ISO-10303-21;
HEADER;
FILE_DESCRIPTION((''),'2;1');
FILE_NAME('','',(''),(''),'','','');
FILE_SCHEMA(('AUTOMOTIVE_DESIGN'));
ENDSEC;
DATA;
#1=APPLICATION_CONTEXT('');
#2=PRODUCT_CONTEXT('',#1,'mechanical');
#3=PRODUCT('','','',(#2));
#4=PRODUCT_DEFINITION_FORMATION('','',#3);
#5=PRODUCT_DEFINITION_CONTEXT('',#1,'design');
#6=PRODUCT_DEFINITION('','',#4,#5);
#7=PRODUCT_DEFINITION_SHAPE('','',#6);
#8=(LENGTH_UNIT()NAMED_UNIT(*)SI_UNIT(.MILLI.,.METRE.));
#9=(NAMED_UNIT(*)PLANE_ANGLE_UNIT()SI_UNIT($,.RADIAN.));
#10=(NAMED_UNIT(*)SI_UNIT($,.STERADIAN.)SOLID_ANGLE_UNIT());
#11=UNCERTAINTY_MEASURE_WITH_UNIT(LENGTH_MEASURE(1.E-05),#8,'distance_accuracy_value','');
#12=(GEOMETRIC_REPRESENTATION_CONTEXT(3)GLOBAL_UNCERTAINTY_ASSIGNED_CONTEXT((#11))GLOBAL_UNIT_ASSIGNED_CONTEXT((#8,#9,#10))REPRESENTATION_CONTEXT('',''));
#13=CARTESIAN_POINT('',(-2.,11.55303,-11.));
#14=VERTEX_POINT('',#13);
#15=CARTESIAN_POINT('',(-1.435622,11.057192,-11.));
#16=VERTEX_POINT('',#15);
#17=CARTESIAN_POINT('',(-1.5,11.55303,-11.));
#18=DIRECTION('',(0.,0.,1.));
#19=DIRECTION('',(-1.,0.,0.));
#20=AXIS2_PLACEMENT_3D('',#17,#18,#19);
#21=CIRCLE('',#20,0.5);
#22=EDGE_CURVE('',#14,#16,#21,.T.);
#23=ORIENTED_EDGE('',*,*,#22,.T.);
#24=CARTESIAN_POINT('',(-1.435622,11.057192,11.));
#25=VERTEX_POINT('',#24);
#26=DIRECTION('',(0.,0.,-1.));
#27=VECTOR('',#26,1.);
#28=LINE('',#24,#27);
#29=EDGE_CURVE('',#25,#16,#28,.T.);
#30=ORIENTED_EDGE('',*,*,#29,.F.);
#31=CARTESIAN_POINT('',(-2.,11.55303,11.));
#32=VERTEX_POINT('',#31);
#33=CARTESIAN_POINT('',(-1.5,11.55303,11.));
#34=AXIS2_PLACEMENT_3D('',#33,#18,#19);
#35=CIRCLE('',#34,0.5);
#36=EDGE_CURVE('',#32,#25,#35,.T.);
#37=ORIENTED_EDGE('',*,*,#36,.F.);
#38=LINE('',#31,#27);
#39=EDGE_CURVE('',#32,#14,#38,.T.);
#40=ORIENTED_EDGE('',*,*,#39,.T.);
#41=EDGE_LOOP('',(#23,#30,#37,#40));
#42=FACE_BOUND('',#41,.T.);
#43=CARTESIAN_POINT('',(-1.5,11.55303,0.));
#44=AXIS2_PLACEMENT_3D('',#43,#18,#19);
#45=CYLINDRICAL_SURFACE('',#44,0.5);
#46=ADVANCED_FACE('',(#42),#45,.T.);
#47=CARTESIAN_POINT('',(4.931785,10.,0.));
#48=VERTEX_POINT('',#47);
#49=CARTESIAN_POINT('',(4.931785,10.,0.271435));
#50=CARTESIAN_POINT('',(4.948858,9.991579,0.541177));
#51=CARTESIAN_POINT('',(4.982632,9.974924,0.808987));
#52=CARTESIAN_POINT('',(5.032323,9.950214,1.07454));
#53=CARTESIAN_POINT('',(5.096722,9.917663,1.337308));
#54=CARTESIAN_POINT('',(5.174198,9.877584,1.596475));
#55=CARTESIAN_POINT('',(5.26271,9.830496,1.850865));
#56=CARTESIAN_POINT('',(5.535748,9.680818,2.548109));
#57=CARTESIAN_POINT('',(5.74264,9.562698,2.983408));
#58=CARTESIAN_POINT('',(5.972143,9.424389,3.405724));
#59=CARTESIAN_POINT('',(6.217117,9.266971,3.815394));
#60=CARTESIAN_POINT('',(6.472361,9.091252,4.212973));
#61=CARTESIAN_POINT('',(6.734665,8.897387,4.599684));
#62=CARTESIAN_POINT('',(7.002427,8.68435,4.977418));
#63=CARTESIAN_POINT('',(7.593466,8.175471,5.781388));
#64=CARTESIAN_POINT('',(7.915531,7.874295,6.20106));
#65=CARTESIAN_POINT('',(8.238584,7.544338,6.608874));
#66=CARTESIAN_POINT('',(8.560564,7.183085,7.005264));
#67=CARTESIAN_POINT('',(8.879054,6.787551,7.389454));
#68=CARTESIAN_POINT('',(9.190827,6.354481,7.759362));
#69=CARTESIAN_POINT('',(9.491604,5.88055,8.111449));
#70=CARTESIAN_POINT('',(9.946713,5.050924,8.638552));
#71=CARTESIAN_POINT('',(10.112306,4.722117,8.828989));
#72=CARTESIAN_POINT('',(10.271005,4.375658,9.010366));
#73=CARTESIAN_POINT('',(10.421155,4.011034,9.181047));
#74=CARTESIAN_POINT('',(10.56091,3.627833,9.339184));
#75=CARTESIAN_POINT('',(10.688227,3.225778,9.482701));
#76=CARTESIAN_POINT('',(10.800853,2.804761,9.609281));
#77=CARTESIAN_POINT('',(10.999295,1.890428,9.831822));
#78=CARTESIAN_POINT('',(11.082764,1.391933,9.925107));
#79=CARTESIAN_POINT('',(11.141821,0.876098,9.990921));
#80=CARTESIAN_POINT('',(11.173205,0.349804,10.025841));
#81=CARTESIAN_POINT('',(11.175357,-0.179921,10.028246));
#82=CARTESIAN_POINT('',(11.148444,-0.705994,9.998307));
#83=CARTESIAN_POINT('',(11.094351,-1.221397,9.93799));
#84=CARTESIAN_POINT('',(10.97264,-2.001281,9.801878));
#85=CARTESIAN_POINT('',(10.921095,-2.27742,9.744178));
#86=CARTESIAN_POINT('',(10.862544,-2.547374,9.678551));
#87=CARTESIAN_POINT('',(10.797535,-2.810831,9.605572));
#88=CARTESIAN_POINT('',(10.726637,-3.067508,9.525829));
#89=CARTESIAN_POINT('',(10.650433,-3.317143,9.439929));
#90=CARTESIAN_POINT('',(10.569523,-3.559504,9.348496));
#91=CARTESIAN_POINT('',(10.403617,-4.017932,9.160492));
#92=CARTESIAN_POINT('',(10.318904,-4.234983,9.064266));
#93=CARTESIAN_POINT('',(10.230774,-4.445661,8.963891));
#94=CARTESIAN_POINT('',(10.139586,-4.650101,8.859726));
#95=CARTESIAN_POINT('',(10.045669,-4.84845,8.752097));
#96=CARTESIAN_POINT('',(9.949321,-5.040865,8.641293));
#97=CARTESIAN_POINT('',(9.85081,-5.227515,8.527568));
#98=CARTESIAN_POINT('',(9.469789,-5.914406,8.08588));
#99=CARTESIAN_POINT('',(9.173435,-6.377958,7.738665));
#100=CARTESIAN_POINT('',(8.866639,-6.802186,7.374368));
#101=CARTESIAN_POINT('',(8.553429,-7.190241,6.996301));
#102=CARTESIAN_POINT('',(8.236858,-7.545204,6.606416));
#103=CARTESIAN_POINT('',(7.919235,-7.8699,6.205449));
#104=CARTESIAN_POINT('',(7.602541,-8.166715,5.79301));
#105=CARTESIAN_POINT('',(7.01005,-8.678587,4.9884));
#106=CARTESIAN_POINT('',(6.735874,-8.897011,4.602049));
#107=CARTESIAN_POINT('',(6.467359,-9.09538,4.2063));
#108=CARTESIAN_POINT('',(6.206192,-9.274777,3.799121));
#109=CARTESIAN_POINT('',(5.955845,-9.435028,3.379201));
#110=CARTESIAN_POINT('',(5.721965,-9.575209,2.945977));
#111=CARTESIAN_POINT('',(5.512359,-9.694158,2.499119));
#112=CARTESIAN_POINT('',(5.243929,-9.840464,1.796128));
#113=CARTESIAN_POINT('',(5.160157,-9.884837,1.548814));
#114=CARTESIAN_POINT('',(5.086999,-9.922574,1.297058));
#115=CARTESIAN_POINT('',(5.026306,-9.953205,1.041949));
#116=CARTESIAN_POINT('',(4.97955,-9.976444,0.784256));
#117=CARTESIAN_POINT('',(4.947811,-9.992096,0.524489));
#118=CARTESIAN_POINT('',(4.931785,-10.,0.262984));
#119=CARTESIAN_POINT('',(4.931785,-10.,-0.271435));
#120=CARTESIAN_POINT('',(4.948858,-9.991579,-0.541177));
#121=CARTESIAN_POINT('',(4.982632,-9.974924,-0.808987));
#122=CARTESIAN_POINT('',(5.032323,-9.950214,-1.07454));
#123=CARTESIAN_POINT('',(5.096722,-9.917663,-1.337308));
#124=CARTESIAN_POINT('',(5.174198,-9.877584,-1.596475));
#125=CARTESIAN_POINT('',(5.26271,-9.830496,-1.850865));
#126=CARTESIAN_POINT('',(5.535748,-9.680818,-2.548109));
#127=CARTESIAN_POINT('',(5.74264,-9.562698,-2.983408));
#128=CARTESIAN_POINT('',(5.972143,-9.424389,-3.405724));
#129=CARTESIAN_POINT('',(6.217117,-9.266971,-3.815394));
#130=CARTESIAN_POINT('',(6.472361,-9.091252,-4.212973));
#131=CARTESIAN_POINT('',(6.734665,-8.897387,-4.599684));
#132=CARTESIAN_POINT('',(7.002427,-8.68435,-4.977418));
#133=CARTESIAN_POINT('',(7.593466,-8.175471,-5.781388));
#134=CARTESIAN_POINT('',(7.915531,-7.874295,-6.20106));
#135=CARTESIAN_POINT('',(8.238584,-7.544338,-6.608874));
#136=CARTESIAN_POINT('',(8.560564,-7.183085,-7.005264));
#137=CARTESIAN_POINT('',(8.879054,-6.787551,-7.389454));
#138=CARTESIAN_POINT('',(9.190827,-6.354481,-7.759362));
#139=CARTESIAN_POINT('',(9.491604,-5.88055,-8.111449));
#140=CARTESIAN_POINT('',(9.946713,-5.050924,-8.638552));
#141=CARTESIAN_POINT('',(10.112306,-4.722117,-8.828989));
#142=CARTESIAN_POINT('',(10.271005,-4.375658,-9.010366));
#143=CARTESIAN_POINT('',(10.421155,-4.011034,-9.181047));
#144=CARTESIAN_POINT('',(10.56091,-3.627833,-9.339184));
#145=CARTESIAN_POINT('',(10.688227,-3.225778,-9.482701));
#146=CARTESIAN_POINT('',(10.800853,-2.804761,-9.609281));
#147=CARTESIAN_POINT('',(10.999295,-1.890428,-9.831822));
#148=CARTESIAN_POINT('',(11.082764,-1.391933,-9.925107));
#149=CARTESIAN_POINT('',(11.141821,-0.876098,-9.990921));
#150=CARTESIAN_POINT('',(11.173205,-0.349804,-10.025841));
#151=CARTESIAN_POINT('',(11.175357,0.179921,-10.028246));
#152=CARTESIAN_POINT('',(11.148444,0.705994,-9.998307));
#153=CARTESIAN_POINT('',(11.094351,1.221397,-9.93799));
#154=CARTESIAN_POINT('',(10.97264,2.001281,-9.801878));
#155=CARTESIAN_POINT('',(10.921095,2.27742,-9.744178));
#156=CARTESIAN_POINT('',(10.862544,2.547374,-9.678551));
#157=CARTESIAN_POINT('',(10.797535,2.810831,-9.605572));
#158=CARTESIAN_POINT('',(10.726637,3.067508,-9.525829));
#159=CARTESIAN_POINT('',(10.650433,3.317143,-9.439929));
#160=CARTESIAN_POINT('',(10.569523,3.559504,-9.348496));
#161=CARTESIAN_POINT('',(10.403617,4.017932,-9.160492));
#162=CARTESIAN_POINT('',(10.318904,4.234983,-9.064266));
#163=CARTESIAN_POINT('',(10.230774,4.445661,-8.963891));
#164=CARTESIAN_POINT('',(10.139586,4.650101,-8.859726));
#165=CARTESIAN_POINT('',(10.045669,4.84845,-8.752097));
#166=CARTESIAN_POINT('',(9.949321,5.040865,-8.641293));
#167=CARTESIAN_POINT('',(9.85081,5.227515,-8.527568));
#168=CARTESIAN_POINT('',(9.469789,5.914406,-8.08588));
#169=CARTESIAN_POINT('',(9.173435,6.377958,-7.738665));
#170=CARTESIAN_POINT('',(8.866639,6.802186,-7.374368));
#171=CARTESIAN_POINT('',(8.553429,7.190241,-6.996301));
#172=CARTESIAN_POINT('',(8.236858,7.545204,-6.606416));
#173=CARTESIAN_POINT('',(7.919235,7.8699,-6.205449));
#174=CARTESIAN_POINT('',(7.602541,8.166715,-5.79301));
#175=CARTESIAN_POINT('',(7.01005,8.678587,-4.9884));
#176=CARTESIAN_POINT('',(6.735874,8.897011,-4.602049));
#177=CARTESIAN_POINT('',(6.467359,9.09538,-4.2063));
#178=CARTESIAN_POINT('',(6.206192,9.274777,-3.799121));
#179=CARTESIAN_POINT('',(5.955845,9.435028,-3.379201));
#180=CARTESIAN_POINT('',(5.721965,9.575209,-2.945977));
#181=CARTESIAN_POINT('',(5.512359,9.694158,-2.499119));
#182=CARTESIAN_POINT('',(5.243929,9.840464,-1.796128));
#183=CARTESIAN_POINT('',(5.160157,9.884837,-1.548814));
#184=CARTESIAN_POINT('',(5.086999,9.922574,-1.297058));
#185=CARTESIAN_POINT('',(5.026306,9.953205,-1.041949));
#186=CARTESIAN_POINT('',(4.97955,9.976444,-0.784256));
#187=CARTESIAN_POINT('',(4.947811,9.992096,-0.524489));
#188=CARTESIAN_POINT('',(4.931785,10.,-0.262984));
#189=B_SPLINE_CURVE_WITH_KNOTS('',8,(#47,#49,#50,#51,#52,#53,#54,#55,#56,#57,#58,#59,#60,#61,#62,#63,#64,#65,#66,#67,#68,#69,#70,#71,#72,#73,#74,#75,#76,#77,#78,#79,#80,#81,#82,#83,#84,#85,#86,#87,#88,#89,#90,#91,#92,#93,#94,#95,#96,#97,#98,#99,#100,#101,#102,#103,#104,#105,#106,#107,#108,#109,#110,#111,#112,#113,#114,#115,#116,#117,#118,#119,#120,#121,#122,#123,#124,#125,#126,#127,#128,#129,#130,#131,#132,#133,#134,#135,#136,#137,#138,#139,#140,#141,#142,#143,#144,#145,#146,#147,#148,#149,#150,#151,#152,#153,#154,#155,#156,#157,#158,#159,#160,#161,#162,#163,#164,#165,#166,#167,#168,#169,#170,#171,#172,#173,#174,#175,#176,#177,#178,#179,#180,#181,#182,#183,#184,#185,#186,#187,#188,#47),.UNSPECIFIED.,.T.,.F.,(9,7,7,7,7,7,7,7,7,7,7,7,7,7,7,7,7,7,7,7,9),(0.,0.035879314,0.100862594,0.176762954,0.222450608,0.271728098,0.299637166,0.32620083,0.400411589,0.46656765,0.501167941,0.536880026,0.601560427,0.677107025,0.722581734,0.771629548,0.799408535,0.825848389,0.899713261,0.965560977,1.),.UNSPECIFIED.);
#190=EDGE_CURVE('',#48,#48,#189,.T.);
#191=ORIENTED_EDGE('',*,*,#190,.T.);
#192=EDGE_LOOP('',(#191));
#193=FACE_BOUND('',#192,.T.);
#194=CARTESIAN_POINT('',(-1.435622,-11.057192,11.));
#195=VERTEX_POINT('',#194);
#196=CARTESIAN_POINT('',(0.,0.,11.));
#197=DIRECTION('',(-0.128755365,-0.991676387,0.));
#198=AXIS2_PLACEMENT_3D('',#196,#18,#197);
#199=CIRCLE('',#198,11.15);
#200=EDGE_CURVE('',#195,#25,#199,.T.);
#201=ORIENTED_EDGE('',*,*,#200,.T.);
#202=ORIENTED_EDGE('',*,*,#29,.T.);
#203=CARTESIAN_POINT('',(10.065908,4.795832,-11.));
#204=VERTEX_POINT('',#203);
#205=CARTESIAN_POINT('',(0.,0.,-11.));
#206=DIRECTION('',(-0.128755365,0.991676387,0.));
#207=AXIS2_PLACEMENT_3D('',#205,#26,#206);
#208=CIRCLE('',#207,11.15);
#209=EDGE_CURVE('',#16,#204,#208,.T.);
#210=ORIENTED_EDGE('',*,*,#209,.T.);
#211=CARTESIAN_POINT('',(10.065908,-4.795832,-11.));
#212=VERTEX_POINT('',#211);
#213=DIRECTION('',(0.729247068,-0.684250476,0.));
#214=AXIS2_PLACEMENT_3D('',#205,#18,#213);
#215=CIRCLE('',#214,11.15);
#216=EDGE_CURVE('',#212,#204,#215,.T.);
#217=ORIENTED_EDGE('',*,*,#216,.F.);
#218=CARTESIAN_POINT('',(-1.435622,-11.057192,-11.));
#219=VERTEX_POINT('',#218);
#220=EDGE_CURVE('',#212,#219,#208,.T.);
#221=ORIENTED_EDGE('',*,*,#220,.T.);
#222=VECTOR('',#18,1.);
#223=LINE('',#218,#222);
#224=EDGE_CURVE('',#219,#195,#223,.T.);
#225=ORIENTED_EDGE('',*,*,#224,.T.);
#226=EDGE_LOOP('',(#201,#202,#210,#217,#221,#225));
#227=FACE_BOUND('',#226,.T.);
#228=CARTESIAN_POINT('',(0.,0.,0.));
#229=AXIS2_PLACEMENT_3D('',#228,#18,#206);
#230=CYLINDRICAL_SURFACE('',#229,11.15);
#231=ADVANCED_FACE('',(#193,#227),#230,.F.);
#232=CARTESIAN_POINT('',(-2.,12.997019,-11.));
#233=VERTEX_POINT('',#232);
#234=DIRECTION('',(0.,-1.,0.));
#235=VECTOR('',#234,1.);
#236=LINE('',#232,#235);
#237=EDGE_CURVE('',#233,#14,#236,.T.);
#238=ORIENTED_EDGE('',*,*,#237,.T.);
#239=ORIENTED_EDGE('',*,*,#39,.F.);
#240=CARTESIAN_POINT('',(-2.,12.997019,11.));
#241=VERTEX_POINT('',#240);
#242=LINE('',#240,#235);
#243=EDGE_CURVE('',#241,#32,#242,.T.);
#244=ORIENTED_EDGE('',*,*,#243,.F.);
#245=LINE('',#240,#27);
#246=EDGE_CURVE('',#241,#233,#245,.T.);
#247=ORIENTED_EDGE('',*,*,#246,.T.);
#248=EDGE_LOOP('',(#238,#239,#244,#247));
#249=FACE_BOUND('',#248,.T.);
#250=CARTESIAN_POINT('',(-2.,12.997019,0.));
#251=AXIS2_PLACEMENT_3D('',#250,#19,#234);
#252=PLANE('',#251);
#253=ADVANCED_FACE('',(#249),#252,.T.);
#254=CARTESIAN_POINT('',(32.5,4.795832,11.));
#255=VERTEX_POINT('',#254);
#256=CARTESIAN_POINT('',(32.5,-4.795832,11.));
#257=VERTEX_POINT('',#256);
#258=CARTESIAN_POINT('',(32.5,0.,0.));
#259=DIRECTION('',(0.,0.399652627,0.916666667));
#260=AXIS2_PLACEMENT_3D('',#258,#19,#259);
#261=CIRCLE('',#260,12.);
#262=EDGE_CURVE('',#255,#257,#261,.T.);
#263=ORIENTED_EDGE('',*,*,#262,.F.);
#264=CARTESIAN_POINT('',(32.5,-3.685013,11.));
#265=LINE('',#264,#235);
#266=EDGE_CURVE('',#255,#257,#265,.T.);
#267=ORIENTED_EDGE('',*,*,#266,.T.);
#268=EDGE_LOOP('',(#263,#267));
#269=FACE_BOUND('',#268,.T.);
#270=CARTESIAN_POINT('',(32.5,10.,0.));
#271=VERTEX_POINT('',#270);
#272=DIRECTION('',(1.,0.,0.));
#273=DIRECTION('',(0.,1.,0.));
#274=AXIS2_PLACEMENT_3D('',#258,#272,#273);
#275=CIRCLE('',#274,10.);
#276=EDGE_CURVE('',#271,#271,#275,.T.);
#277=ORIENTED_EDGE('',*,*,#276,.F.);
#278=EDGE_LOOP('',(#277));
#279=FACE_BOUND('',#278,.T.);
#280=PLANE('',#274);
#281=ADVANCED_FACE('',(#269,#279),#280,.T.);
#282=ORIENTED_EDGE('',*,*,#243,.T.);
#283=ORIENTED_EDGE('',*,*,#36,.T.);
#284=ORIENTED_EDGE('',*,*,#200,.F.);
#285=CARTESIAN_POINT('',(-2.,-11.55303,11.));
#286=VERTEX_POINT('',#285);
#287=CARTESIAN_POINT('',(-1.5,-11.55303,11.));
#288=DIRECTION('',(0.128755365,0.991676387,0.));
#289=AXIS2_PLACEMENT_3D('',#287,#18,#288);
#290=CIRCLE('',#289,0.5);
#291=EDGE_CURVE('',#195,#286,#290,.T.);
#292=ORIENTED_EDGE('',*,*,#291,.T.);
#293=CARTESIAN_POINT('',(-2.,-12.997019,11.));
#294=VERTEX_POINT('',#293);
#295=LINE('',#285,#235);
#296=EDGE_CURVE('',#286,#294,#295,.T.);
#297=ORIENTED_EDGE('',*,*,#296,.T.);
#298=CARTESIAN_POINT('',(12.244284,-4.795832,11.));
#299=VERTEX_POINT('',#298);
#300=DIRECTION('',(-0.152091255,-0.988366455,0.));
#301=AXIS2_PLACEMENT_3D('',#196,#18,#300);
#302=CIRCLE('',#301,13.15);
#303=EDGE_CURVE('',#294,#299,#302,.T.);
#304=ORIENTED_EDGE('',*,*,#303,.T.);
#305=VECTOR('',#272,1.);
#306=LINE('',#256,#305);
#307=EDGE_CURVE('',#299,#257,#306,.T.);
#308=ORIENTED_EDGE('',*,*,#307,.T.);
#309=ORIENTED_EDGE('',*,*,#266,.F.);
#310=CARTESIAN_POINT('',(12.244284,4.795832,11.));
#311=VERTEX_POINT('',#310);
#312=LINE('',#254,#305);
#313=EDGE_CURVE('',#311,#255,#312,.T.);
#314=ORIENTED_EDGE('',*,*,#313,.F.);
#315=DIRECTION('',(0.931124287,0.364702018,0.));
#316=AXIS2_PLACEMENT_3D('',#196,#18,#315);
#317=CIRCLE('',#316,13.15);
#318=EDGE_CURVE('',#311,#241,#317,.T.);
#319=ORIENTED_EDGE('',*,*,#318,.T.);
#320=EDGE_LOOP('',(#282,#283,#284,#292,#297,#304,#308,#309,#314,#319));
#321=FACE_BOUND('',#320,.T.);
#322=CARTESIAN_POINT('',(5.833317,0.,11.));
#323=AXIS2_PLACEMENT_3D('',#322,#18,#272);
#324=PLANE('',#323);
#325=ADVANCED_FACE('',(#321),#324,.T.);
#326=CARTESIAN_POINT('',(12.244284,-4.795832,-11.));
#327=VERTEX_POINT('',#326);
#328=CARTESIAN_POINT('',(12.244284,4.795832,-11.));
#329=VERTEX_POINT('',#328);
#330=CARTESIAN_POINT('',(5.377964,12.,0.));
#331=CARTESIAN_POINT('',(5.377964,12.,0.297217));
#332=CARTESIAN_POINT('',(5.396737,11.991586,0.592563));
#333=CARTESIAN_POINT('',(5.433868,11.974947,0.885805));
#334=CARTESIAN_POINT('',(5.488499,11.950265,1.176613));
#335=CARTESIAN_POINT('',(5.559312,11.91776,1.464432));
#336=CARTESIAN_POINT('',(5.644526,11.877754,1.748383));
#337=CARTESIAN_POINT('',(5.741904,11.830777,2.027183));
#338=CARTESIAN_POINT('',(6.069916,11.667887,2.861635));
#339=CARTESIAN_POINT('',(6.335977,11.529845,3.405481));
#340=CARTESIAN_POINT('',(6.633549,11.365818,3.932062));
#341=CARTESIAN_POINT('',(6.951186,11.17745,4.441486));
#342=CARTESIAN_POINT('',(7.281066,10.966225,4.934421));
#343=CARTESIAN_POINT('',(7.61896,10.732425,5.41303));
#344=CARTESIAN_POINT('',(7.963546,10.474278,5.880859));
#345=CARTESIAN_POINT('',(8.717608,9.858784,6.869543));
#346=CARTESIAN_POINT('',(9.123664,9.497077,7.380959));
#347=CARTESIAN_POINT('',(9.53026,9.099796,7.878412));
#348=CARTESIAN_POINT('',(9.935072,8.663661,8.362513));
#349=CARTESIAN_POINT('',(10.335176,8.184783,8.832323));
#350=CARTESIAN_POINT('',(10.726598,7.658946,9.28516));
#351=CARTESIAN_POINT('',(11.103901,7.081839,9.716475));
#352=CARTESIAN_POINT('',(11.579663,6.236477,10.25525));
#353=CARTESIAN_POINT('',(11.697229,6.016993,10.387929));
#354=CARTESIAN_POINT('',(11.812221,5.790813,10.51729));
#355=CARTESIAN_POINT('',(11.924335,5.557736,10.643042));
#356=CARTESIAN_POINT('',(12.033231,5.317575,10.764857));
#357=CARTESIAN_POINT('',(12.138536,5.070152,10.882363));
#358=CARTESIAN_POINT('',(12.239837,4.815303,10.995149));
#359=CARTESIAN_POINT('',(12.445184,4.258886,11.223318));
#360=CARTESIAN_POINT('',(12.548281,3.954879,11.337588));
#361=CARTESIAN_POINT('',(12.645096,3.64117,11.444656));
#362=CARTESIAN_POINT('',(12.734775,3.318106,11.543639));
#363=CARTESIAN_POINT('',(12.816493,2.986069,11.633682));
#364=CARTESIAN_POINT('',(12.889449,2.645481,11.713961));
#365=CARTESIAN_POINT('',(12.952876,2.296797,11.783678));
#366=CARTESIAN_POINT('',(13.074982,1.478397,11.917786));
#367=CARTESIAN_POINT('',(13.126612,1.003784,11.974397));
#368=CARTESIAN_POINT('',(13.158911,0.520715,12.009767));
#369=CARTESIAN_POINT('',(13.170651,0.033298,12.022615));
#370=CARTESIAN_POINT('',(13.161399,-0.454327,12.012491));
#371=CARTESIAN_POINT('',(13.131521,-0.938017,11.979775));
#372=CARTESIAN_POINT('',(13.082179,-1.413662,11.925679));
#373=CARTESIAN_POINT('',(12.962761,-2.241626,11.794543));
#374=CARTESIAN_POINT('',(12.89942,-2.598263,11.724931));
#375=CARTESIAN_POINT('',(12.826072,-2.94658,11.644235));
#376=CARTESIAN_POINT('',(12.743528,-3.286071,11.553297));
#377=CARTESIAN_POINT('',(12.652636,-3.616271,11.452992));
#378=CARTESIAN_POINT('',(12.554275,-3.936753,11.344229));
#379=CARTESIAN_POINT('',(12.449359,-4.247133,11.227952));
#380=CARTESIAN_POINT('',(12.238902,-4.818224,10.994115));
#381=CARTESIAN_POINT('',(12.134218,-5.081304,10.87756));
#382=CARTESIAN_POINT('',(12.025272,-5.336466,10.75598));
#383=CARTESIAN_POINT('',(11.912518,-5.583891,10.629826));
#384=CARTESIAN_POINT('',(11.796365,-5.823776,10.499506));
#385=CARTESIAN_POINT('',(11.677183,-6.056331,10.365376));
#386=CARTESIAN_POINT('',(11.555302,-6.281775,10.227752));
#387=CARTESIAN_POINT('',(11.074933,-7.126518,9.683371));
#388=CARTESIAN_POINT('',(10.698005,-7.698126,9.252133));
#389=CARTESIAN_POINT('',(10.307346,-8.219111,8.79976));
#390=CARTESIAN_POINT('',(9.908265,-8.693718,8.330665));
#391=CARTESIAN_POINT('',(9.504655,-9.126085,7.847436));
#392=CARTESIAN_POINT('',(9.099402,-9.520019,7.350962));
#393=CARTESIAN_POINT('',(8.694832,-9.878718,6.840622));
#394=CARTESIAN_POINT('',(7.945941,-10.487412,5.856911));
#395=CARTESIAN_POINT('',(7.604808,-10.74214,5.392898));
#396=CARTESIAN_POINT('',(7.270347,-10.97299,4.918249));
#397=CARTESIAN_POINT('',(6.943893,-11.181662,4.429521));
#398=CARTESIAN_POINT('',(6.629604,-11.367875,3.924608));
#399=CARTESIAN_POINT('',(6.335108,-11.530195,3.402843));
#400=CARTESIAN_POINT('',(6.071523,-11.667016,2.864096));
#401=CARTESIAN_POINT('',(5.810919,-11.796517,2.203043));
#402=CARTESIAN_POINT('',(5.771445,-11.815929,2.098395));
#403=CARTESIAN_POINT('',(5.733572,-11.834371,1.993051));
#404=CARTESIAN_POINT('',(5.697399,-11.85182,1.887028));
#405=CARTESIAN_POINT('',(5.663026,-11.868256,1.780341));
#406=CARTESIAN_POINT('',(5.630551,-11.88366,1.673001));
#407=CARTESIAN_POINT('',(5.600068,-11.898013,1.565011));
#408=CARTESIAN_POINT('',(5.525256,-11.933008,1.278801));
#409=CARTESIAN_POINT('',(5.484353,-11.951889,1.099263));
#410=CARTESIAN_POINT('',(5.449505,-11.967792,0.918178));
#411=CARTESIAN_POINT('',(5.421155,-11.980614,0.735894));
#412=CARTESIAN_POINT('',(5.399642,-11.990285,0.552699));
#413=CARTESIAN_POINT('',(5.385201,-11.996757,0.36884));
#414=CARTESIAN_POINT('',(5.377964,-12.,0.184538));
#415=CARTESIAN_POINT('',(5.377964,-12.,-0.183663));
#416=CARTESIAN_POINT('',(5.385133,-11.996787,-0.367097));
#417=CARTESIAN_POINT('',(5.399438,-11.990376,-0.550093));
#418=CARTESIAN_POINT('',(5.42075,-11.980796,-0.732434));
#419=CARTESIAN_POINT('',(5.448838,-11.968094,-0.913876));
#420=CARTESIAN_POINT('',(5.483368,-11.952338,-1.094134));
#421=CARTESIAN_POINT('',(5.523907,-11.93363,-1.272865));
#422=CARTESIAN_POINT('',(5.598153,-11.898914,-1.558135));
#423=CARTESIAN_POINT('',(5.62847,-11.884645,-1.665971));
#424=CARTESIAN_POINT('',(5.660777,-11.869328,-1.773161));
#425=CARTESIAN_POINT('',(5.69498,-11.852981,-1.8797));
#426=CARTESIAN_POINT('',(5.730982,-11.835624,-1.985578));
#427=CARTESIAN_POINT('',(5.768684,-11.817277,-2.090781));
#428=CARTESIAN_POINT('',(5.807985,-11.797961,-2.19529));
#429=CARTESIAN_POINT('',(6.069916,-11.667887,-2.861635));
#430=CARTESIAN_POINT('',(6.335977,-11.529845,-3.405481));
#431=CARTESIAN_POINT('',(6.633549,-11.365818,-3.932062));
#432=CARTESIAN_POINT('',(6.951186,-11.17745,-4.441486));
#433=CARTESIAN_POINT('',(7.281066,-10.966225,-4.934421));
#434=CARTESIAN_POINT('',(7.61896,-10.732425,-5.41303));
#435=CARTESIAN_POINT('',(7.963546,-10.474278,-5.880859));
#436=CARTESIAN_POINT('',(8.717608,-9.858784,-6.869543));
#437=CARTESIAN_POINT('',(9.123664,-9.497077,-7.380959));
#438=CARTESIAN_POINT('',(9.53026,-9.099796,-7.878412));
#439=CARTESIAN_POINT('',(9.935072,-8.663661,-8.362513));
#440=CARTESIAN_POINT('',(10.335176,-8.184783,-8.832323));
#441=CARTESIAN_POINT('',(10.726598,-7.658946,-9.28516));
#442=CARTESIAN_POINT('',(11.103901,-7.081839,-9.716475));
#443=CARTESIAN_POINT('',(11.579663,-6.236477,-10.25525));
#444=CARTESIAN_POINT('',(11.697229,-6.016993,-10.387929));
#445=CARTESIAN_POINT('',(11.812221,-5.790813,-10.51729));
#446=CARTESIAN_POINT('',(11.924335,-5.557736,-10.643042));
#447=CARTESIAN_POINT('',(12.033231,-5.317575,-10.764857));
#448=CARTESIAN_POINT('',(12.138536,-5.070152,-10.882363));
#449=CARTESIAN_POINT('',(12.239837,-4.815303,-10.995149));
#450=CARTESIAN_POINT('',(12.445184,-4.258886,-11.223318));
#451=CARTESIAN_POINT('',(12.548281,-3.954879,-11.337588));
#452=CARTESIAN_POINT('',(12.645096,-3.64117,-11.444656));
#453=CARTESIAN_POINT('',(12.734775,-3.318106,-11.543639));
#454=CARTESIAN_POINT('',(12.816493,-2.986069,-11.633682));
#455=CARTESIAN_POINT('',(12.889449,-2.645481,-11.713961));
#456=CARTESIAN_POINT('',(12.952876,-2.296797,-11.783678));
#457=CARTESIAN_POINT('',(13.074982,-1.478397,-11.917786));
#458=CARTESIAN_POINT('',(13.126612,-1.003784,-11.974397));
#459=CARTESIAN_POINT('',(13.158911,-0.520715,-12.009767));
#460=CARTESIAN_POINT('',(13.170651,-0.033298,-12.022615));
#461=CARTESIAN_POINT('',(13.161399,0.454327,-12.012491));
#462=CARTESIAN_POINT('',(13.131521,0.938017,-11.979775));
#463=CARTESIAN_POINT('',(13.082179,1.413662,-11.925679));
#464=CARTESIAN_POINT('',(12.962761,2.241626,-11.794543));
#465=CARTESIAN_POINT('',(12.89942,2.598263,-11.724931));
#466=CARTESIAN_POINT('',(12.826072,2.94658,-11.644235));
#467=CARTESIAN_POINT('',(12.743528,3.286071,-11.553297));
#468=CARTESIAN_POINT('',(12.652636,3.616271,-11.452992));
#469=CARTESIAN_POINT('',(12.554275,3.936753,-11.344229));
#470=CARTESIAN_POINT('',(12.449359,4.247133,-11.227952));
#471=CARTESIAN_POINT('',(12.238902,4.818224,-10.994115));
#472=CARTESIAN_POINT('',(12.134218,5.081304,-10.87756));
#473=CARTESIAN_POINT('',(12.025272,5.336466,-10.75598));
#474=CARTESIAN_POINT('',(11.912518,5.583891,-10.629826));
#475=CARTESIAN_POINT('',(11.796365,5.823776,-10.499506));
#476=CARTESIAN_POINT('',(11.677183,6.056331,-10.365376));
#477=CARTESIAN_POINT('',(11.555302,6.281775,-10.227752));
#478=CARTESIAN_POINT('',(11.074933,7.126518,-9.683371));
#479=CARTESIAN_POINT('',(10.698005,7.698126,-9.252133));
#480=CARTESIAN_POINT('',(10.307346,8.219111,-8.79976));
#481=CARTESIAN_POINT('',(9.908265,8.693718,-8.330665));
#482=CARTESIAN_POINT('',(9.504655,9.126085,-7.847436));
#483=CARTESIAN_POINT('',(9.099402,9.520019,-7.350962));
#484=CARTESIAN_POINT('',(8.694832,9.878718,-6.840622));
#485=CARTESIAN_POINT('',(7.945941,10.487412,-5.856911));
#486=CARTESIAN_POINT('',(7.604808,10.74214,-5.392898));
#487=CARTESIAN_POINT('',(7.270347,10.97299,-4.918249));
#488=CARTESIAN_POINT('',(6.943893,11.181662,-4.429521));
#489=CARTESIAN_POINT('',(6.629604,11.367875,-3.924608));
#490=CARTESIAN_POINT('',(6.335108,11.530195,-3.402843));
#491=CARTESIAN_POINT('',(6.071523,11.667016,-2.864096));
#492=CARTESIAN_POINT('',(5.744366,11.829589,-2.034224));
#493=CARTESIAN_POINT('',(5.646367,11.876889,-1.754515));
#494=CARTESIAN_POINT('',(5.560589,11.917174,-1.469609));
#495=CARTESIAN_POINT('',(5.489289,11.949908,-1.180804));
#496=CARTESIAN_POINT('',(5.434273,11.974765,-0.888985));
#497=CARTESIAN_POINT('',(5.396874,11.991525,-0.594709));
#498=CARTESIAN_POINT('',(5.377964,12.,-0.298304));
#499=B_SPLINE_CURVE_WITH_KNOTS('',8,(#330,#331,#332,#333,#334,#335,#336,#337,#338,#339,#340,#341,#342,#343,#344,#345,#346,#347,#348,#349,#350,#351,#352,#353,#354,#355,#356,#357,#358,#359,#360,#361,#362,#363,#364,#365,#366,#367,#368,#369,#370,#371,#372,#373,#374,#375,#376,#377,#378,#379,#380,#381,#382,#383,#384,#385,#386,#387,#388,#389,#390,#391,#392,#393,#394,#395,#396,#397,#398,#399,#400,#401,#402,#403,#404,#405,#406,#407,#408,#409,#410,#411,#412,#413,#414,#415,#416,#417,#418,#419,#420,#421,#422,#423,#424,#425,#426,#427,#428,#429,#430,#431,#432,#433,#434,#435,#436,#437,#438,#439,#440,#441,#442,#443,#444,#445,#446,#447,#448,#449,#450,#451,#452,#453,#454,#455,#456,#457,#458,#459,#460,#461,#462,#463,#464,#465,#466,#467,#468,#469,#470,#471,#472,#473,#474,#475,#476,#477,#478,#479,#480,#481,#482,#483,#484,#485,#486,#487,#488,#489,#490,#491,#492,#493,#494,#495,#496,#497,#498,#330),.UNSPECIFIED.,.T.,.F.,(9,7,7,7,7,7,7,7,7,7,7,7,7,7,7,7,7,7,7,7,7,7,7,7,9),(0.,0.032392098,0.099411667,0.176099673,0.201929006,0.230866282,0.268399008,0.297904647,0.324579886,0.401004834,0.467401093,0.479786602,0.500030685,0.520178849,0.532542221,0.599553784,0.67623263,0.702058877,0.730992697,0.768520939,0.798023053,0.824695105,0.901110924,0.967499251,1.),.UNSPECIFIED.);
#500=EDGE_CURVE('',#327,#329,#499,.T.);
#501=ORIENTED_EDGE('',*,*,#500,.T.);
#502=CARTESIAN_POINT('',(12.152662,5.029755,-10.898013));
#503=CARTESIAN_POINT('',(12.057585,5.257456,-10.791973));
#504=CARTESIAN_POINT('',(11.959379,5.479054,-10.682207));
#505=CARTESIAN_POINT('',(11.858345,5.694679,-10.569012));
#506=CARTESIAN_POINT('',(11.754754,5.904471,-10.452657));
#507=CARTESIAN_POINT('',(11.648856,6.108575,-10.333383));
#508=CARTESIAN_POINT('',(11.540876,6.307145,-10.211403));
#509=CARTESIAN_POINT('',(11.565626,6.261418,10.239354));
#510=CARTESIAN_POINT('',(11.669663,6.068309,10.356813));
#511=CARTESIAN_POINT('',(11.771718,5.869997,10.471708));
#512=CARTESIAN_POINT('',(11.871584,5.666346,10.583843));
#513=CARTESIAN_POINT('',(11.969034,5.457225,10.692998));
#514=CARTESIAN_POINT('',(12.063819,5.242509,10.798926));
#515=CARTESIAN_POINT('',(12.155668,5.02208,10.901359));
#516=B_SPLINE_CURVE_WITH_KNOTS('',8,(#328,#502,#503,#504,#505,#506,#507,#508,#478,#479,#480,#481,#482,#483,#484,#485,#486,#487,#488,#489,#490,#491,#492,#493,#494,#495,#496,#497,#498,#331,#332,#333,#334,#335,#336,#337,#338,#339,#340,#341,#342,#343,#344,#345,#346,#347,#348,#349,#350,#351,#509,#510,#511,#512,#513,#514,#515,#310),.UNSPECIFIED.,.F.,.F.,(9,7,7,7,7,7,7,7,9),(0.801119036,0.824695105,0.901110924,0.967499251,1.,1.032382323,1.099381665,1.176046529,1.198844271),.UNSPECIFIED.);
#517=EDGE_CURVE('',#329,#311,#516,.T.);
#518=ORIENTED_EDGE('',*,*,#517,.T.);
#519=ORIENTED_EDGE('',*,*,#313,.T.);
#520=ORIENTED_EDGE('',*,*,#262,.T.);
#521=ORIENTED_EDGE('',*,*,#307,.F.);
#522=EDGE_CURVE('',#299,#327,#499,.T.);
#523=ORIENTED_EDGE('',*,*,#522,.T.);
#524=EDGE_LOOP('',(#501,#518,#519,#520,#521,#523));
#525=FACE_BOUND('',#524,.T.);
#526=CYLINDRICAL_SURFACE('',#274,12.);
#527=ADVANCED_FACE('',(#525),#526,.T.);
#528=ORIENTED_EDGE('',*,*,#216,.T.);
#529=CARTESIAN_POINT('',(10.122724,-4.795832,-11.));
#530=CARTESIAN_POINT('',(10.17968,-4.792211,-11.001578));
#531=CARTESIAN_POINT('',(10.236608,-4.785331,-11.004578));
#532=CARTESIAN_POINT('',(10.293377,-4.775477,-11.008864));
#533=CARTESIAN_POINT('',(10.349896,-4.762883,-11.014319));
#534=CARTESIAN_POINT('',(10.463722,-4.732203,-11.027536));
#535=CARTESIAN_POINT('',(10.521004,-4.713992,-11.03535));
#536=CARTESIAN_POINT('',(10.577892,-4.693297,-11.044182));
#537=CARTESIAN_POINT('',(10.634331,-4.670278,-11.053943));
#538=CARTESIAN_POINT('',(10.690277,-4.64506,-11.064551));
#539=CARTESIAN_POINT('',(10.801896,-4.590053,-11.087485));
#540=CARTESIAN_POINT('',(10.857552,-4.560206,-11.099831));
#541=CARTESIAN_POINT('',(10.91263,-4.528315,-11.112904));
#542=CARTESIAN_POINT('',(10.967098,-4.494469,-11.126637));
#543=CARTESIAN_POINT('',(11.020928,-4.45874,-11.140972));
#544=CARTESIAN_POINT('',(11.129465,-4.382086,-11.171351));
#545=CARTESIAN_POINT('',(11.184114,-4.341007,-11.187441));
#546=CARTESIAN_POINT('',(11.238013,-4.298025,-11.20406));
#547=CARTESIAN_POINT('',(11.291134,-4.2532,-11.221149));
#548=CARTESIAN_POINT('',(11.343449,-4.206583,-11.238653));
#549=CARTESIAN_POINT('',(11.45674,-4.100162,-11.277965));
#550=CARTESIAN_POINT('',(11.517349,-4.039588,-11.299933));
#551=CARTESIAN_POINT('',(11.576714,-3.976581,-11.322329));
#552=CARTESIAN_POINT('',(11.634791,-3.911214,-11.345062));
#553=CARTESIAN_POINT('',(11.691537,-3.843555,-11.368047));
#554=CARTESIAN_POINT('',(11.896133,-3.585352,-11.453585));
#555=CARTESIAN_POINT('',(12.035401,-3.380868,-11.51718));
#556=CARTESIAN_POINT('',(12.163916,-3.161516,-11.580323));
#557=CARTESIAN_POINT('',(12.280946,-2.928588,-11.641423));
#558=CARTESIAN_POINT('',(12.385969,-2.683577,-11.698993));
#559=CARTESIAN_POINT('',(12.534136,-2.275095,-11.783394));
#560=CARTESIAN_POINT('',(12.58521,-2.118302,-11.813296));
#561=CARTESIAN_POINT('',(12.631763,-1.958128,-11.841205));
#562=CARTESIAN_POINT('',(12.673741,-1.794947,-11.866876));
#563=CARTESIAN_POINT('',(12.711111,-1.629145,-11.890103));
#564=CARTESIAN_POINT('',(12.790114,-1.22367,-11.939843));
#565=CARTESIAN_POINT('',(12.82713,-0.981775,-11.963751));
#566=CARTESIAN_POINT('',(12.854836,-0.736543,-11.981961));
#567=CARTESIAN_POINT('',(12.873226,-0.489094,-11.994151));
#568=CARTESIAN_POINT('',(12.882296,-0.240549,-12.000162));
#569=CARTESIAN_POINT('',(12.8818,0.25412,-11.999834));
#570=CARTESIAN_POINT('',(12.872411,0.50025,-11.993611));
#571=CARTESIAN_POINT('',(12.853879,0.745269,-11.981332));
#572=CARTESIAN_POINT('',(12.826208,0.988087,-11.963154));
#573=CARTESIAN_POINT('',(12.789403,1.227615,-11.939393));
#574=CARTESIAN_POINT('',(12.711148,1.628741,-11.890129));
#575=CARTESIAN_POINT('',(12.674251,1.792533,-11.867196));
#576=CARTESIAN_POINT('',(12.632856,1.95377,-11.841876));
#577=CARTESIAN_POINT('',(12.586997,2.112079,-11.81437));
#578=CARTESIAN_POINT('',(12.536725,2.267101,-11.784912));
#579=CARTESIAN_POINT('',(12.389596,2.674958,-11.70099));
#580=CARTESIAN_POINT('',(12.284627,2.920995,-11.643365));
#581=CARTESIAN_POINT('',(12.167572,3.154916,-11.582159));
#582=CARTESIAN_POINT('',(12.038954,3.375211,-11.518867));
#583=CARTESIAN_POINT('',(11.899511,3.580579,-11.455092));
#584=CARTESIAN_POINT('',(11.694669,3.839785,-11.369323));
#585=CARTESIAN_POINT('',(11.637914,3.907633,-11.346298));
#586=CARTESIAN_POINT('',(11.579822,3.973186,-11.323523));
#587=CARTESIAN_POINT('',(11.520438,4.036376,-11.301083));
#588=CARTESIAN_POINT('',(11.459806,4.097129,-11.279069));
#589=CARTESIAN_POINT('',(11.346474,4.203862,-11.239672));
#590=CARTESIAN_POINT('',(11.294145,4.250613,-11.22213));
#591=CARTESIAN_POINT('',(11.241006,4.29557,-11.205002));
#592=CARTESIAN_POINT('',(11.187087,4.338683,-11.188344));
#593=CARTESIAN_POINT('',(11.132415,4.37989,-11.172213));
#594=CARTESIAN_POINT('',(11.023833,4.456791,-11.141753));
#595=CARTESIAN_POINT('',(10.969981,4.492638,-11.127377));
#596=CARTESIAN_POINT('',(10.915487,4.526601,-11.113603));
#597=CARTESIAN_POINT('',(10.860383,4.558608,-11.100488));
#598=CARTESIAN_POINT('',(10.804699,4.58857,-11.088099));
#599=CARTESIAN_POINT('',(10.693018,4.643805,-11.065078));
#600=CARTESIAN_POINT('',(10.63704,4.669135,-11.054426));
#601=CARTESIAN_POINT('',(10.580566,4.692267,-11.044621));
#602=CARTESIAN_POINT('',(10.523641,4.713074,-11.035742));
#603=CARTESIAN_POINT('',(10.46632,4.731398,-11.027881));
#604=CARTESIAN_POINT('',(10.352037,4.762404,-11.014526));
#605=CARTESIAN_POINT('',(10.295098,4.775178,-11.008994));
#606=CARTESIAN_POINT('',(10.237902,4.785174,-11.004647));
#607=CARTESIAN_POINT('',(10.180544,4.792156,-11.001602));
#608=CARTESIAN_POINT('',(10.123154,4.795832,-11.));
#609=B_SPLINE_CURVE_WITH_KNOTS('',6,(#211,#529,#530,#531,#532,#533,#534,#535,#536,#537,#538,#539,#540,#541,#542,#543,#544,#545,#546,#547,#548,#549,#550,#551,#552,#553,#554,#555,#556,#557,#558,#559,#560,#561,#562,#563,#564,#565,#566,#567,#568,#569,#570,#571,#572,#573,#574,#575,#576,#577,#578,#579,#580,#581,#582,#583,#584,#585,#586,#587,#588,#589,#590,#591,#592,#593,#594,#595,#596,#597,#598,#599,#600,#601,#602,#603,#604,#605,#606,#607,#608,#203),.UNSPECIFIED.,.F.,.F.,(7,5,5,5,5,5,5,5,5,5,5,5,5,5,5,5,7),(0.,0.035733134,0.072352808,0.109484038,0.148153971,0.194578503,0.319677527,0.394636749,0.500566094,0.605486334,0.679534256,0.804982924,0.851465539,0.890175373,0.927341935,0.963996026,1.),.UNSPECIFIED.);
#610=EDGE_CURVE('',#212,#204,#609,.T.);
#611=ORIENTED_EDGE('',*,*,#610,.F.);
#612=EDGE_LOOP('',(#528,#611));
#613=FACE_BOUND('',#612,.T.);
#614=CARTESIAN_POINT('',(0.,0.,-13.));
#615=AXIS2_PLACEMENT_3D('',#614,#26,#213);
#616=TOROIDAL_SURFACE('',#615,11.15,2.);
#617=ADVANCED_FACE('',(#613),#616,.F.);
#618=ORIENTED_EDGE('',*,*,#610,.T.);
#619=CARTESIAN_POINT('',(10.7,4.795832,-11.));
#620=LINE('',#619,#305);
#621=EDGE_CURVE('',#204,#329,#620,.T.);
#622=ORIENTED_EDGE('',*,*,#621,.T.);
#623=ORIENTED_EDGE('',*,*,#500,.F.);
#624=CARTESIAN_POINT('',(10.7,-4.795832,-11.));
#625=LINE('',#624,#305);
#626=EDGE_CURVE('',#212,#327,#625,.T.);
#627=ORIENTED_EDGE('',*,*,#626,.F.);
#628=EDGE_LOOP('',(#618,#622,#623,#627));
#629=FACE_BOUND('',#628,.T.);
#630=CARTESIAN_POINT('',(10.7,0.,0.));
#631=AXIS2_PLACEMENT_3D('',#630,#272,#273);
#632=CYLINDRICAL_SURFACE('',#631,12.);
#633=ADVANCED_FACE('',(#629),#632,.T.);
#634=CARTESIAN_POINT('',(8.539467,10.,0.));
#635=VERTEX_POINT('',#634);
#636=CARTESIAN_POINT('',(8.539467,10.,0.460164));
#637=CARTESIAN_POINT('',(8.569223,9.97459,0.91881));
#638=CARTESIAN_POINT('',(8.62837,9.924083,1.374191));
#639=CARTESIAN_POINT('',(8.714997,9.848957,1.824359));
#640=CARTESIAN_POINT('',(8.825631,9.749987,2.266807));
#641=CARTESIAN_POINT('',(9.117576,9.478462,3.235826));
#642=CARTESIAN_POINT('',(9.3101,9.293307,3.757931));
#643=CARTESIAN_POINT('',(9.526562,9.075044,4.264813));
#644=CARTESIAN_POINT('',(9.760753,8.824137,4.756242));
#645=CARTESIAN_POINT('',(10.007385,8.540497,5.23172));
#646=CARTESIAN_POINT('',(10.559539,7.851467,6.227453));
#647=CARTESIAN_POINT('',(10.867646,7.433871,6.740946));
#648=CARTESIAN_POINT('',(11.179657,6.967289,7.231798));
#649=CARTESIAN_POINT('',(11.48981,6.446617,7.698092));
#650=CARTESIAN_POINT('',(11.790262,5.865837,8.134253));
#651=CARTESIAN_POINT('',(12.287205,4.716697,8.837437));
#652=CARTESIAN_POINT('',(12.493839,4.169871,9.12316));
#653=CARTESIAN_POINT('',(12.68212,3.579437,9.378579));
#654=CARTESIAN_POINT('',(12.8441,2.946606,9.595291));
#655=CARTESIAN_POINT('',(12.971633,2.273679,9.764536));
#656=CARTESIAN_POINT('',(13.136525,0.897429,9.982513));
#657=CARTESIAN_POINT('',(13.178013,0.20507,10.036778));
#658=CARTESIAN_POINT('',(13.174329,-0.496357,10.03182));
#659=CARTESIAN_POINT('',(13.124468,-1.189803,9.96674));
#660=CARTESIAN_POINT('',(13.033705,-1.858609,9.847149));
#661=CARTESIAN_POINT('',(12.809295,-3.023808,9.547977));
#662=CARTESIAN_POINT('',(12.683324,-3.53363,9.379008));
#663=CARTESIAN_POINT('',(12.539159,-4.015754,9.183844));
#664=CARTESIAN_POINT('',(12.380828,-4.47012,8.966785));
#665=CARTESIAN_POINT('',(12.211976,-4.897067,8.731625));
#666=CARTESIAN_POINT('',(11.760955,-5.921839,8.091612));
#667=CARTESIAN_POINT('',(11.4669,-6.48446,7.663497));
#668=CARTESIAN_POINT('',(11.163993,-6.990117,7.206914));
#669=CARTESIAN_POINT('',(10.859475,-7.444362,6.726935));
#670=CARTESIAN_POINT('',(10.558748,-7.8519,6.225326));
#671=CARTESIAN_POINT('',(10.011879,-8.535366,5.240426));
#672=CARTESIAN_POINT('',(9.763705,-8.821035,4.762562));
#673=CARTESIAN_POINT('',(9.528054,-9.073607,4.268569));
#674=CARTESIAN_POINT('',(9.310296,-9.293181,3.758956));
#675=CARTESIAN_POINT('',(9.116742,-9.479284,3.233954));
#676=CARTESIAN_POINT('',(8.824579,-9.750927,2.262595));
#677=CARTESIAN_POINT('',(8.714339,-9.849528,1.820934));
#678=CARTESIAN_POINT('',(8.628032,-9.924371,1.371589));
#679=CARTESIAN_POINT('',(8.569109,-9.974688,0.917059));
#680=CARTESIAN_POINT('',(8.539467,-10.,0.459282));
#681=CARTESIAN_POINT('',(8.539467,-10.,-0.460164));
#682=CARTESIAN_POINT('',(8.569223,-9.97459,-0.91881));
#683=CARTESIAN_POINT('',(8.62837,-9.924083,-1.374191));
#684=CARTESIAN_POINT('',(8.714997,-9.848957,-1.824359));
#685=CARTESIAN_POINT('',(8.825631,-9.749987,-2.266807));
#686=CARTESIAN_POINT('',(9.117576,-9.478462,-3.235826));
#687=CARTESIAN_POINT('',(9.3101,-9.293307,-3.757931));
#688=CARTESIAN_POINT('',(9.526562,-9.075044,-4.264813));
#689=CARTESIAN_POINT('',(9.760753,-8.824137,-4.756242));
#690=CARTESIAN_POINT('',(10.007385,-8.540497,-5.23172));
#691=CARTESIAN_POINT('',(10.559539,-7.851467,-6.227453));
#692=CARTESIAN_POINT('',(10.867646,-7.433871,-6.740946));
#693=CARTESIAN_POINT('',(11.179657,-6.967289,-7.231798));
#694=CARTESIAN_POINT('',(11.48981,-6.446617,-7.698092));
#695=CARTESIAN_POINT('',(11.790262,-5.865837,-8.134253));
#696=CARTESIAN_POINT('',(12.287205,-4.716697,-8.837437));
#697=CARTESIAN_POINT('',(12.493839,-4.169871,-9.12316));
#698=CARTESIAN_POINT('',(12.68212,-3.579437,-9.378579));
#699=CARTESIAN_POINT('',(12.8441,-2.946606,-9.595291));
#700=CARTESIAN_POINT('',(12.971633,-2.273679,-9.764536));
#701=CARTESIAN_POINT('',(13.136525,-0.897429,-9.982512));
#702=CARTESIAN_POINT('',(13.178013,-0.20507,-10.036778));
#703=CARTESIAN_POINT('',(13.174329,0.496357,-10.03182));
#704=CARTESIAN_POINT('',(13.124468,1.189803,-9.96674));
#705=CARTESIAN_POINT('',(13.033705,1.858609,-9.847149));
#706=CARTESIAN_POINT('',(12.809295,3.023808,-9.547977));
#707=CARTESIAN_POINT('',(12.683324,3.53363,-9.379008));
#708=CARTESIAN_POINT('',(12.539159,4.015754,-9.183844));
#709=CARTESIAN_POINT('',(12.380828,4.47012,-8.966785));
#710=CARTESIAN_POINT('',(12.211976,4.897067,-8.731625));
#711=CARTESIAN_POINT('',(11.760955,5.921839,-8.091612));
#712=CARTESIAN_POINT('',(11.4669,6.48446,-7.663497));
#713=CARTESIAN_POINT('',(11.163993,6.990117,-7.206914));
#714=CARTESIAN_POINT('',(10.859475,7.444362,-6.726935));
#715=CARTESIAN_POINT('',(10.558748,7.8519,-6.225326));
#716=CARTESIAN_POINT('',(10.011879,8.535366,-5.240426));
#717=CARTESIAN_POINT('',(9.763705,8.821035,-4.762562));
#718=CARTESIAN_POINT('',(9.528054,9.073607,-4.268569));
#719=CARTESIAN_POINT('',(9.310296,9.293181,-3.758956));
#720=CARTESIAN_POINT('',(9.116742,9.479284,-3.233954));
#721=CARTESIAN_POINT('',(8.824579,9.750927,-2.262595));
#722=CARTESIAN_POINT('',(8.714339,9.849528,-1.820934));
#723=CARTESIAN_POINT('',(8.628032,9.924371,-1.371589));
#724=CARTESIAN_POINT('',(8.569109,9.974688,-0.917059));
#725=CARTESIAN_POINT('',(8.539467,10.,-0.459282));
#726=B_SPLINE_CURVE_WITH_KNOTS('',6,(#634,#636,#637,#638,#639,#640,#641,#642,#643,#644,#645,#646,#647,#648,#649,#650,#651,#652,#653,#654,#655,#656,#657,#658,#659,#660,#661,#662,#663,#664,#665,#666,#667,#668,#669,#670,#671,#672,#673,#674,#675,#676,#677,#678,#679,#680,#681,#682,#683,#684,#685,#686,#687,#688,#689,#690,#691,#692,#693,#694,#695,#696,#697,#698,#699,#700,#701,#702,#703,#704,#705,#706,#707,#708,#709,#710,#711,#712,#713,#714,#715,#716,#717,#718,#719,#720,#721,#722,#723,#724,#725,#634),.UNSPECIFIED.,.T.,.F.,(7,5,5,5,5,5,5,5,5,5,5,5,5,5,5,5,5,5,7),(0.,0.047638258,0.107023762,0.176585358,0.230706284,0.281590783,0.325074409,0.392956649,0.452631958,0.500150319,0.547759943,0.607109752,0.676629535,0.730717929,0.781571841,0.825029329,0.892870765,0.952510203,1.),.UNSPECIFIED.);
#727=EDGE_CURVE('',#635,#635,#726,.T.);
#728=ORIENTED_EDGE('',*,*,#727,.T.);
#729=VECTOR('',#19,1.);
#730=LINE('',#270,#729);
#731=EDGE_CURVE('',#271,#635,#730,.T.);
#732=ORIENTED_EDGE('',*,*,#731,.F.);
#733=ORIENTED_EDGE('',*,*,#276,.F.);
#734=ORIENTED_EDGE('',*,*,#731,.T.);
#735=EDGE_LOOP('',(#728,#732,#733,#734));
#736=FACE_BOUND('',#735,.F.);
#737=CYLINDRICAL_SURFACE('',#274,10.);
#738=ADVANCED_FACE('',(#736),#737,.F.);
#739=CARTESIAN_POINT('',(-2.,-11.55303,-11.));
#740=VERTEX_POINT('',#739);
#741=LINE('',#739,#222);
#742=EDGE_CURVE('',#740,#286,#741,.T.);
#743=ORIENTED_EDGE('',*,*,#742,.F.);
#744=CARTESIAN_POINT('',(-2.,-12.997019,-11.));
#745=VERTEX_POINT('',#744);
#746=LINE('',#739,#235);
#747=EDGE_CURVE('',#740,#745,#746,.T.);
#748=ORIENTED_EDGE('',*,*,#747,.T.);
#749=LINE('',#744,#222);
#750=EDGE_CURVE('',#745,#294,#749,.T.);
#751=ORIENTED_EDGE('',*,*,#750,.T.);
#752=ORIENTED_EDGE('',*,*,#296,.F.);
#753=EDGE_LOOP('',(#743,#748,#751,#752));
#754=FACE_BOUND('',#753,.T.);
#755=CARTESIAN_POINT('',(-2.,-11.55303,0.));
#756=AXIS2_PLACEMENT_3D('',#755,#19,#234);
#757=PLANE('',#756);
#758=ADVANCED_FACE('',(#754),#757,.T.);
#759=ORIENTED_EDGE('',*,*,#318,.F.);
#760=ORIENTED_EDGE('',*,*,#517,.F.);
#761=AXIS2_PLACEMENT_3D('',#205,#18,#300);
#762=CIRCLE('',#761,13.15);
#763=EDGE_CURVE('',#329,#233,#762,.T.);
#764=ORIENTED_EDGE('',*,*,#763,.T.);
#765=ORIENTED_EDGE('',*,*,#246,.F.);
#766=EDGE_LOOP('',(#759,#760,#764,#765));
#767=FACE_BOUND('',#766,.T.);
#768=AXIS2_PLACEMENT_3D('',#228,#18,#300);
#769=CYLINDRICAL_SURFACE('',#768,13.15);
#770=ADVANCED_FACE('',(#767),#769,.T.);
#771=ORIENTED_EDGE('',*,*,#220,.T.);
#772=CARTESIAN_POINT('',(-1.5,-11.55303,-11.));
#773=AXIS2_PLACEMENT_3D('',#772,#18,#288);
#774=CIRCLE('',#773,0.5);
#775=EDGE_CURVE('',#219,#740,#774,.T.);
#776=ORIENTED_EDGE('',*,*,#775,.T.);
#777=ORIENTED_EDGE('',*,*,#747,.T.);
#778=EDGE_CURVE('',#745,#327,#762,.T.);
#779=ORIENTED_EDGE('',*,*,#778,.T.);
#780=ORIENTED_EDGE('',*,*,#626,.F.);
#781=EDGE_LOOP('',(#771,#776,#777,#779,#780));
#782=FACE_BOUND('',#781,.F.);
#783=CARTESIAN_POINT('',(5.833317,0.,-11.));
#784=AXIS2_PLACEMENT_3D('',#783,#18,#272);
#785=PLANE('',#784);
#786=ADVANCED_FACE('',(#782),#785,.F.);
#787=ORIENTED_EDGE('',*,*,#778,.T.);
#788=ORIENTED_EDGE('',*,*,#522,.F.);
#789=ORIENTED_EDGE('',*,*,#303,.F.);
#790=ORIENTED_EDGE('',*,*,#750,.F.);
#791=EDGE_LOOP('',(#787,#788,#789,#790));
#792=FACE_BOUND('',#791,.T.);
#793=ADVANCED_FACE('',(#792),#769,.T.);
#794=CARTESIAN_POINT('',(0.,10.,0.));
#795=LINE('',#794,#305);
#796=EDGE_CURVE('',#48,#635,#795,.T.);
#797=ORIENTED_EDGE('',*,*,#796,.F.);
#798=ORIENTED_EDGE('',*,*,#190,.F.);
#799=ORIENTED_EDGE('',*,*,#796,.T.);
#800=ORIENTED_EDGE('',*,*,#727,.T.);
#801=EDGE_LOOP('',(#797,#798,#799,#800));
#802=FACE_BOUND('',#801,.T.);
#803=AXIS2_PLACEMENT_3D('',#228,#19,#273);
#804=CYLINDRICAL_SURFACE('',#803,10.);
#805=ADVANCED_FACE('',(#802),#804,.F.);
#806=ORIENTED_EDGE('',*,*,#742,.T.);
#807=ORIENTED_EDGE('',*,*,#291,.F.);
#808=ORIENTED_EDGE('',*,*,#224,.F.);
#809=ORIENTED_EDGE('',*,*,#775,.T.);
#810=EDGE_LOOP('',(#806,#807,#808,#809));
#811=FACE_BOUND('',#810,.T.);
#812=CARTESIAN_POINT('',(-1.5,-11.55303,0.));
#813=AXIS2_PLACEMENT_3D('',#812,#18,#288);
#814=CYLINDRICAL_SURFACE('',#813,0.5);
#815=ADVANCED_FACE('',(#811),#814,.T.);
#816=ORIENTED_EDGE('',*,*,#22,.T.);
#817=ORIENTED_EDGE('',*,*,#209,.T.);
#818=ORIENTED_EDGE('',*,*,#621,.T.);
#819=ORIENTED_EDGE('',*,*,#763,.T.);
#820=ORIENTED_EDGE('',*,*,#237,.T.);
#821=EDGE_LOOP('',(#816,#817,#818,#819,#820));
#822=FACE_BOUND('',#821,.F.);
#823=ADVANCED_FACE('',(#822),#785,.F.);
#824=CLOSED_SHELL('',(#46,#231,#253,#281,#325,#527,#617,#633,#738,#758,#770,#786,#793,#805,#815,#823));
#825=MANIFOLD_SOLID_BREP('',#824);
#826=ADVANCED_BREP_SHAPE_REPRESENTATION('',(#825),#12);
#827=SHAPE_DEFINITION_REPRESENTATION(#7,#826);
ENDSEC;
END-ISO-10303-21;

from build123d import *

# Parameters (mm, degrees)
F1_DEPTH      = 11
F1_DEPTH_BACK = 11
F2_R          = 10
F3_DEPTH      = 25
F6_END_RADIUS = 13.15
F5_R          = 12
F5_R_2        = 10
F6_REACH      = 68.442125597
F7_T4_ANGLE   = 86.3533795546
F7_S5_R       = 12
F7_T6_DEPTH   = 12
F8_W          = 15.702219009
F8_H          = 5.1735627732
F9_DEPTH      = 32.5010001


# Not quite as in the source:
# - a fillet or chamfer that OpenCascade refuses, or shapes differently, is made with other operations: its cross-section is extruded or revolved along the edge and cut away or added


with BuildPart() as f1:
    # F0 (on Top) → F1 (new body, two sides)
    with BuildSketch(Plane.XY) as f1_sk:
        with BuildLine():
            ThreePointArc((-1.4356223176, 11.0571917122), (11.15, 0), (-1.4356223176, -11.0571917122))
            ThreePointArc((-1.4356223176, -11.0571917122), (-1.8300084535, -11.1774045329), (-2, -11.5530299056))
            Line((-2, -11.5530299056), (-2, -12.997018889))
            ThreePointArc((-2, -12.997018889), (13.15, 0), (-2, 12.997018889))
            Line((-2, 12.997018889), (-2, 11.5530299056))
            ThreePointArc((-2, 11.5530299056), (-1.8300084535, 11.1774045329), (-1.4356223176, 11.0571917122))
        make_face()
    extrude(amount=F1_DEPTH)
    extrude(f1_sk.sketch, amount=-F1_DEPTH_BACK)

    # F2 (on Right) → F3 (cut)
    with BuildSketch(Plane.YZ):
        Circle(F2_R)
    extrude(amount=F3_DEPTH, mode=Mode.SUBTRACT)

    f6_end = (Plane(origin=(0, 0, 0), x_dir=(-1, 0, 0), z_dir=(0, 0, -1)) * Cylinder(F6_END_RADIUS, 211.856580101, mode=Mode.PRIVATE)).faces().sort_by_distance((13.15, 0, 10.6251383555))[0]
    # F5 (on offset) → F6 (join, up to the whole of a round face its end follows)
    with BuildSketch(Plane.YZ.offset(32.5)):
        Circle(F5_R)
        Circle(F5_R_2, mode=Mode.SUBTRACT)
    f6_long = extrude(amount=-F6_REACH, mode=Mode.PRIVATE)
    add(split(f6_long, bisect_by=f6_end, keep=Keep.ALL, mode=Mode.PRIVATE).solids().sort_by_distance((32.5, -11.660588745, 0))[0])

    # F7: fillet of radius 2 on 1 edges, made by hand


with BuildPart() as f7_tool2:
    # F7_s3 → F7_t4 (revolve)
    with BuildSketch(Plane(origin=(0, 0, 0), x_dir=(0, 0, 1), z_dir=(-0.6842504755, -0.7292470684, 0))):
        with BuildLine():
            ThreePointArc((-11, -11.15), (-11.5857864376, -12.5642135624), (-13, -13.15))
            Line((-13, -13.15), (-11, -13.15))
            Line((-11, -13.15), (-11, -11.15))
        make_face()
    revolve(axis=Axis((0, 0, -11), (0, 0, 1)), revolution_arc=F7_T4_ANGLE)

    # F7_s5 → F7_t6 (intersect, symmetric)
    with BuildSketch(Plane.YZ.offset(10.7)):
        Circle(F7_S5_R)
    extrude(amount=F7_T6_DEPTH, both=True, mode=Mode.INTERSECT)


with BuildPart() as f1_1:
    add(f1.part)

    # F7_t1: union F7_tool2
    add(f7_tool2.part)

    # F8 (on Right) → F9 (cut, through all)
    with BuildSketch(Plane.YZ):
        with Locations((0.481082825, 13.5867813866)):
            Rectangle(F8_W, F8_H)
    extrude(amount=F9_DEPTH, mode=Mode.SUBTRACT)


solid = f1_1.part
